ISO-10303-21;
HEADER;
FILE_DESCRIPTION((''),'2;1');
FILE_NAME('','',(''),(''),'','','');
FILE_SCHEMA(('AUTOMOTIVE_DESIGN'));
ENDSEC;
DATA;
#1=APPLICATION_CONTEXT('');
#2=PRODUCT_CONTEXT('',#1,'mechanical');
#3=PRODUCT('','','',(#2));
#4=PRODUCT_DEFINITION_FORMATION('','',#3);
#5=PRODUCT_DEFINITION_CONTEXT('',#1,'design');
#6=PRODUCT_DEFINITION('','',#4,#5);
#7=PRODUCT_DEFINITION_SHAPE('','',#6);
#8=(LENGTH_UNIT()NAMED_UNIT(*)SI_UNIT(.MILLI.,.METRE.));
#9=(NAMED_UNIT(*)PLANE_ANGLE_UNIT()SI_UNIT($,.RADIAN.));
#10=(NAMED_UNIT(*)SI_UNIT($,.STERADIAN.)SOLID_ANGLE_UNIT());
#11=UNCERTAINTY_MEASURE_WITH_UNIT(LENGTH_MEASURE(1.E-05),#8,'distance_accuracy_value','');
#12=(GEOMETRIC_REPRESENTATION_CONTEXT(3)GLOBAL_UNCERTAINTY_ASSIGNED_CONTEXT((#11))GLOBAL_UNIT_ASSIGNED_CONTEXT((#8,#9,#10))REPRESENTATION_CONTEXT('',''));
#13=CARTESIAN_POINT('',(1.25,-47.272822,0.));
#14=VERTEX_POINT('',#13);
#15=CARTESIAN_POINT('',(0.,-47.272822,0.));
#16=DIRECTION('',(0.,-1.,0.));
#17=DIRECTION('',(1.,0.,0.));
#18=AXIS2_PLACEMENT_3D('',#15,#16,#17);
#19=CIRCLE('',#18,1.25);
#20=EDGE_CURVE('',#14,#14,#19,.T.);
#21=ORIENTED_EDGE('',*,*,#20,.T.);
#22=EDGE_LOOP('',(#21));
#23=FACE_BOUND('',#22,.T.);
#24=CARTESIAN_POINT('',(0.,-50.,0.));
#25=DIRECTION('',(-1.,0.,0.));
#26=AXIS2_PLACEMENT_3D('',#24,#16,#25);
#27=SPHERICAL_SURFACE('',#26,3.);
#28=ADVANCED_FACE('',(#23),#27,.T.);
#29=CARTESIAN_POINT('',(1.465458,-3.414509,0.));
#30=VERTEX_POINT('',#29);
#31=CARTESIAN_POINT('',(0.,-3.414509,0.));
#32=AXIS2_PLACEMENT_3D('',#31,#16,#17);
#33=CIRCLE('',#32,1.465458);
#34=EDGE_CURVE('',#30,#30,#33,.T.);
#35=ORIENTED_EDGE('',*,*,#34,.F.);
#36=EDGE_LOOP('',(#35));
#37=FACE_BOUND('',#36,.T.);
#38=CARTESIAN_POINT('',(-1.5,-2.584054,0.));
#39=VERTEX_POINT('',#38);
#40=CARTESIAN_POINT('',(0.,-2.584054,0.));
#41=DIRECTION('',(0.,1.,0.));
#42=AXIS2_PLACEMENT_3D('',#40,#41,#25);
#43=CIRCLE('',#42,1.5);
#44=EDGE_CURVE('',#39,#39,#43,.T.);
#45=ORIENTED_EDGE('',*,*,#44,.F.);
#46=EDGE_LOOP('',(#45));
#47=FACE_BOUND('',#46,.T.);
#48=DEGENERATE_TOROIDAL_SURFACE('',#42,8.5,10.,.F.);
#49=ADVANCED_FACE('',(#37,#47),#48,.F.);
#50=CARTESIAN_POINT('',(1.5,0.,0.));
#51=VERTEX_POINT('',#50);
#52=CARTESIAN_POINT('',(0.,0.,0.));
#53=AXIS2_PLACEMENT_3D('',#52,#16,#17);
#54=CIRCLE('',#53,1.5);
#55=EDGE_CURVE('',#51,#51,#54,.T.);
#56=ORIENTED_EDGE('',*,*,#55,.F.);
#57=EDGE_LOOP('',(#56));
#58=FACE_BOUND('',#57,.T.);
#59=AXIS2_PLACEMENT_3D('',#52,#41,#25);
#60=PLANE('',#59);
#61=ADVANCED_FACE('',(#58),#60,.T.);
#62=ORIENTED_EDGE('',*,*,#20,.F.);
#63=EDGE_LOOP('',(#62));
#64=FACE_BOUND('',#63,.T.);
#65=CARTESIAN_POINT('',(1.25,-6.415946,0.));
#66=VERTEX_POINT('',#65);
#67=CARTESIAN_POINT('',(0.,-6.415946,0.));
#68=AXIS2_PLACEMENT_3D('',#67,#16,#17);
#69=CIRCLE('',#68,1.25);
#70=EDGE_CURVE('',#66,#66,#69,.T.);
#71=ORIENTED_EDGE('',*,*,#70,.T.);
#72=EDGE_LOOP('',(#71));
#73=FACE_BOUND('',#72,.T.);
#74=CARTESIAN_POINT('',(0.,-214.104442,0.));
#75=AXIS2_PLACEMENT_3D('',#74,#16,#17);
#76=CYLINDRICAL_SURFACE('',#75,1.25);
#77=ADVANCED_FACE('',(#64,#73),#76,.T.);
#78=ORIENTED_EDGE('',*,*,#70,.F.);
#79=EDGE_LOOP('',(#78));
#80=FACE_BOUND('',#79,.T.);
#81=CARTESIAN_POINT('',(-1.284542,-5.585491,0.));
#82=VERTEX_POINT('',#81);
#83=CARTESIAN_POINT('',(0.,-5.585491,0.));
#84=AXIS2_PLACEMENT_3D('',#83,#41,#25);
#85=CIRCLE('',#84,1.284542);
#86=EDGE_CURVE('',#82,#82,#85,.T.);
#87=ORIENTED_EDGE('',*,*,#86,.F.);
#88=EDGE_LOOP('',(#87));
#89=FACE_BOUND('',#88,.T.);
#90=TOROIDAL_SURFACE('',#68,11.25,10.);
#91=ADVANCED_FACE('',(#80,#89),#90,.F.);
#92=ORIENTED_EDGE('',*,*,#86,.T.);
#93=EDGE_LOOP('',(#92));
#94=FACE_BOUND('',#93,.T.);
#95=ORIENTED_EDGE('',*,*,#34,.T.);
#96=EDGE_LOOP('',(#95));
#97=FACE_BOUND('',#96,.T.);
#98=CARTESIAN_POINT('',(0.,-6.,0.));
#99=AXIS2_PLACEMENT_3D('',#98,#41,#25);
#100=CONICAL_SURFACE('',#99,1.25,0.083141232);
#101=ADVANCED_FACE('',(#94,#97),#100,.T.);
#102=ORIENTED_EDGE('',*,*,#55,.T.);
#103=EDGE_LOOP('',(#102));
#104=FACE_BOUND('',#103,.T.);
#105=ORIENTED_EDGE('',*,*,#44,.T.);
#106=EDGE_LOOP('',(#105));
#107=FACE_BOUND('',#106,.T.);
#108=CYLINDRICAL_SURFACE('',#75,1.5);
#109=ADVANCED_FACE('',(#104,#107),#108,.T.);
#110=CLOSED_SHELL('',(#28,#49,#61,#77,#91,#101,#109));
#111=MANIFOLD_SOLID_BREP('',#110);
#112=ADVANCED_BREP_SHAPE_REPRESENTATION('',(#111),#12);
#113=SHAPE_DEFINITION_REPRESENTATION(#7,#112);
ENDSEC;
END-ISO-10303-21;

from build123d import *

# Parameters (mm, degrees)
FILLET1_R = 10


with BuildPart() as part:
    # Sketch2 → Revolve1 (revolve)
    with BuildSketch(Plane.XY):
        with BuildLine():
            Line((0, 0), (1.5, 0))
            Line((1.5, 0), (1.5, -3))
            Line((1.5, -3), (1.25, -6))
            Line((1.25, -6), (1.25, -47.272821971))
            ThreePointArc((1.25, -47.272821971), (2.931001031, -50.639713183), (0, -53))
            Line((0, -53), (0, 0))
        make_face()
    revolve(axis=Axis((0, -214.104441575, 0), (0, 1, 0)))

    # Fillet1
    # the kernel refuses this fillet: 10 mm, written as the material it adds along each edge
    with BuildSketch(Plane(origin=(0, -6, 0), x_dir=(1, 0, 0), z_dir=(0, 0, 1))) as fillet1_piece_1:
        with BuildLine():
            CenterArc((1.25 + FILLET1_R, -FILLET1_R * 0.0415945787923), FILLET1_R, 175.236358309, 4.763641691)
            Line((1.25, -FILLET1_R * 0.0415945787923), (1.25, 0))
            Line((1.25, 0), (1.25 + FILLET1_R * 0.00345424175512, FILLET1_R * 0.0414509010614))
        make_face()
    revolve(axis=Axis((0, -6, 0), (0, 1, 0)))
    # the kernel refuses this fillet: 10 mm, written as the material it takes off along each edge
    with BuildSketch(Plane(origin=(0, -3, 0), x_dir=(1, 0, 0), z_dir=(0, 0, 1))) as fillet1_2_piece_1:
        with BuildLine():
            CenterArc((1.5 - FILLET1_R, FILLET1_R * 0.0415945787923), FILLET1_R, 355.236358309, 4.763641691)
            Line((1.5 - FILLET1_R * 0.00345424175512, -FILLET1_R * 0.0414509010614), (1.5, 0))
            Line((1.5, 0), (1.5, FILLET1_R * 0.0415945787923))
        make_face()
    revolve(axis=Axis((0, -3, 0), (0, 1, 0)), mode=Mode.SUBTRACT)


solid = part.part
